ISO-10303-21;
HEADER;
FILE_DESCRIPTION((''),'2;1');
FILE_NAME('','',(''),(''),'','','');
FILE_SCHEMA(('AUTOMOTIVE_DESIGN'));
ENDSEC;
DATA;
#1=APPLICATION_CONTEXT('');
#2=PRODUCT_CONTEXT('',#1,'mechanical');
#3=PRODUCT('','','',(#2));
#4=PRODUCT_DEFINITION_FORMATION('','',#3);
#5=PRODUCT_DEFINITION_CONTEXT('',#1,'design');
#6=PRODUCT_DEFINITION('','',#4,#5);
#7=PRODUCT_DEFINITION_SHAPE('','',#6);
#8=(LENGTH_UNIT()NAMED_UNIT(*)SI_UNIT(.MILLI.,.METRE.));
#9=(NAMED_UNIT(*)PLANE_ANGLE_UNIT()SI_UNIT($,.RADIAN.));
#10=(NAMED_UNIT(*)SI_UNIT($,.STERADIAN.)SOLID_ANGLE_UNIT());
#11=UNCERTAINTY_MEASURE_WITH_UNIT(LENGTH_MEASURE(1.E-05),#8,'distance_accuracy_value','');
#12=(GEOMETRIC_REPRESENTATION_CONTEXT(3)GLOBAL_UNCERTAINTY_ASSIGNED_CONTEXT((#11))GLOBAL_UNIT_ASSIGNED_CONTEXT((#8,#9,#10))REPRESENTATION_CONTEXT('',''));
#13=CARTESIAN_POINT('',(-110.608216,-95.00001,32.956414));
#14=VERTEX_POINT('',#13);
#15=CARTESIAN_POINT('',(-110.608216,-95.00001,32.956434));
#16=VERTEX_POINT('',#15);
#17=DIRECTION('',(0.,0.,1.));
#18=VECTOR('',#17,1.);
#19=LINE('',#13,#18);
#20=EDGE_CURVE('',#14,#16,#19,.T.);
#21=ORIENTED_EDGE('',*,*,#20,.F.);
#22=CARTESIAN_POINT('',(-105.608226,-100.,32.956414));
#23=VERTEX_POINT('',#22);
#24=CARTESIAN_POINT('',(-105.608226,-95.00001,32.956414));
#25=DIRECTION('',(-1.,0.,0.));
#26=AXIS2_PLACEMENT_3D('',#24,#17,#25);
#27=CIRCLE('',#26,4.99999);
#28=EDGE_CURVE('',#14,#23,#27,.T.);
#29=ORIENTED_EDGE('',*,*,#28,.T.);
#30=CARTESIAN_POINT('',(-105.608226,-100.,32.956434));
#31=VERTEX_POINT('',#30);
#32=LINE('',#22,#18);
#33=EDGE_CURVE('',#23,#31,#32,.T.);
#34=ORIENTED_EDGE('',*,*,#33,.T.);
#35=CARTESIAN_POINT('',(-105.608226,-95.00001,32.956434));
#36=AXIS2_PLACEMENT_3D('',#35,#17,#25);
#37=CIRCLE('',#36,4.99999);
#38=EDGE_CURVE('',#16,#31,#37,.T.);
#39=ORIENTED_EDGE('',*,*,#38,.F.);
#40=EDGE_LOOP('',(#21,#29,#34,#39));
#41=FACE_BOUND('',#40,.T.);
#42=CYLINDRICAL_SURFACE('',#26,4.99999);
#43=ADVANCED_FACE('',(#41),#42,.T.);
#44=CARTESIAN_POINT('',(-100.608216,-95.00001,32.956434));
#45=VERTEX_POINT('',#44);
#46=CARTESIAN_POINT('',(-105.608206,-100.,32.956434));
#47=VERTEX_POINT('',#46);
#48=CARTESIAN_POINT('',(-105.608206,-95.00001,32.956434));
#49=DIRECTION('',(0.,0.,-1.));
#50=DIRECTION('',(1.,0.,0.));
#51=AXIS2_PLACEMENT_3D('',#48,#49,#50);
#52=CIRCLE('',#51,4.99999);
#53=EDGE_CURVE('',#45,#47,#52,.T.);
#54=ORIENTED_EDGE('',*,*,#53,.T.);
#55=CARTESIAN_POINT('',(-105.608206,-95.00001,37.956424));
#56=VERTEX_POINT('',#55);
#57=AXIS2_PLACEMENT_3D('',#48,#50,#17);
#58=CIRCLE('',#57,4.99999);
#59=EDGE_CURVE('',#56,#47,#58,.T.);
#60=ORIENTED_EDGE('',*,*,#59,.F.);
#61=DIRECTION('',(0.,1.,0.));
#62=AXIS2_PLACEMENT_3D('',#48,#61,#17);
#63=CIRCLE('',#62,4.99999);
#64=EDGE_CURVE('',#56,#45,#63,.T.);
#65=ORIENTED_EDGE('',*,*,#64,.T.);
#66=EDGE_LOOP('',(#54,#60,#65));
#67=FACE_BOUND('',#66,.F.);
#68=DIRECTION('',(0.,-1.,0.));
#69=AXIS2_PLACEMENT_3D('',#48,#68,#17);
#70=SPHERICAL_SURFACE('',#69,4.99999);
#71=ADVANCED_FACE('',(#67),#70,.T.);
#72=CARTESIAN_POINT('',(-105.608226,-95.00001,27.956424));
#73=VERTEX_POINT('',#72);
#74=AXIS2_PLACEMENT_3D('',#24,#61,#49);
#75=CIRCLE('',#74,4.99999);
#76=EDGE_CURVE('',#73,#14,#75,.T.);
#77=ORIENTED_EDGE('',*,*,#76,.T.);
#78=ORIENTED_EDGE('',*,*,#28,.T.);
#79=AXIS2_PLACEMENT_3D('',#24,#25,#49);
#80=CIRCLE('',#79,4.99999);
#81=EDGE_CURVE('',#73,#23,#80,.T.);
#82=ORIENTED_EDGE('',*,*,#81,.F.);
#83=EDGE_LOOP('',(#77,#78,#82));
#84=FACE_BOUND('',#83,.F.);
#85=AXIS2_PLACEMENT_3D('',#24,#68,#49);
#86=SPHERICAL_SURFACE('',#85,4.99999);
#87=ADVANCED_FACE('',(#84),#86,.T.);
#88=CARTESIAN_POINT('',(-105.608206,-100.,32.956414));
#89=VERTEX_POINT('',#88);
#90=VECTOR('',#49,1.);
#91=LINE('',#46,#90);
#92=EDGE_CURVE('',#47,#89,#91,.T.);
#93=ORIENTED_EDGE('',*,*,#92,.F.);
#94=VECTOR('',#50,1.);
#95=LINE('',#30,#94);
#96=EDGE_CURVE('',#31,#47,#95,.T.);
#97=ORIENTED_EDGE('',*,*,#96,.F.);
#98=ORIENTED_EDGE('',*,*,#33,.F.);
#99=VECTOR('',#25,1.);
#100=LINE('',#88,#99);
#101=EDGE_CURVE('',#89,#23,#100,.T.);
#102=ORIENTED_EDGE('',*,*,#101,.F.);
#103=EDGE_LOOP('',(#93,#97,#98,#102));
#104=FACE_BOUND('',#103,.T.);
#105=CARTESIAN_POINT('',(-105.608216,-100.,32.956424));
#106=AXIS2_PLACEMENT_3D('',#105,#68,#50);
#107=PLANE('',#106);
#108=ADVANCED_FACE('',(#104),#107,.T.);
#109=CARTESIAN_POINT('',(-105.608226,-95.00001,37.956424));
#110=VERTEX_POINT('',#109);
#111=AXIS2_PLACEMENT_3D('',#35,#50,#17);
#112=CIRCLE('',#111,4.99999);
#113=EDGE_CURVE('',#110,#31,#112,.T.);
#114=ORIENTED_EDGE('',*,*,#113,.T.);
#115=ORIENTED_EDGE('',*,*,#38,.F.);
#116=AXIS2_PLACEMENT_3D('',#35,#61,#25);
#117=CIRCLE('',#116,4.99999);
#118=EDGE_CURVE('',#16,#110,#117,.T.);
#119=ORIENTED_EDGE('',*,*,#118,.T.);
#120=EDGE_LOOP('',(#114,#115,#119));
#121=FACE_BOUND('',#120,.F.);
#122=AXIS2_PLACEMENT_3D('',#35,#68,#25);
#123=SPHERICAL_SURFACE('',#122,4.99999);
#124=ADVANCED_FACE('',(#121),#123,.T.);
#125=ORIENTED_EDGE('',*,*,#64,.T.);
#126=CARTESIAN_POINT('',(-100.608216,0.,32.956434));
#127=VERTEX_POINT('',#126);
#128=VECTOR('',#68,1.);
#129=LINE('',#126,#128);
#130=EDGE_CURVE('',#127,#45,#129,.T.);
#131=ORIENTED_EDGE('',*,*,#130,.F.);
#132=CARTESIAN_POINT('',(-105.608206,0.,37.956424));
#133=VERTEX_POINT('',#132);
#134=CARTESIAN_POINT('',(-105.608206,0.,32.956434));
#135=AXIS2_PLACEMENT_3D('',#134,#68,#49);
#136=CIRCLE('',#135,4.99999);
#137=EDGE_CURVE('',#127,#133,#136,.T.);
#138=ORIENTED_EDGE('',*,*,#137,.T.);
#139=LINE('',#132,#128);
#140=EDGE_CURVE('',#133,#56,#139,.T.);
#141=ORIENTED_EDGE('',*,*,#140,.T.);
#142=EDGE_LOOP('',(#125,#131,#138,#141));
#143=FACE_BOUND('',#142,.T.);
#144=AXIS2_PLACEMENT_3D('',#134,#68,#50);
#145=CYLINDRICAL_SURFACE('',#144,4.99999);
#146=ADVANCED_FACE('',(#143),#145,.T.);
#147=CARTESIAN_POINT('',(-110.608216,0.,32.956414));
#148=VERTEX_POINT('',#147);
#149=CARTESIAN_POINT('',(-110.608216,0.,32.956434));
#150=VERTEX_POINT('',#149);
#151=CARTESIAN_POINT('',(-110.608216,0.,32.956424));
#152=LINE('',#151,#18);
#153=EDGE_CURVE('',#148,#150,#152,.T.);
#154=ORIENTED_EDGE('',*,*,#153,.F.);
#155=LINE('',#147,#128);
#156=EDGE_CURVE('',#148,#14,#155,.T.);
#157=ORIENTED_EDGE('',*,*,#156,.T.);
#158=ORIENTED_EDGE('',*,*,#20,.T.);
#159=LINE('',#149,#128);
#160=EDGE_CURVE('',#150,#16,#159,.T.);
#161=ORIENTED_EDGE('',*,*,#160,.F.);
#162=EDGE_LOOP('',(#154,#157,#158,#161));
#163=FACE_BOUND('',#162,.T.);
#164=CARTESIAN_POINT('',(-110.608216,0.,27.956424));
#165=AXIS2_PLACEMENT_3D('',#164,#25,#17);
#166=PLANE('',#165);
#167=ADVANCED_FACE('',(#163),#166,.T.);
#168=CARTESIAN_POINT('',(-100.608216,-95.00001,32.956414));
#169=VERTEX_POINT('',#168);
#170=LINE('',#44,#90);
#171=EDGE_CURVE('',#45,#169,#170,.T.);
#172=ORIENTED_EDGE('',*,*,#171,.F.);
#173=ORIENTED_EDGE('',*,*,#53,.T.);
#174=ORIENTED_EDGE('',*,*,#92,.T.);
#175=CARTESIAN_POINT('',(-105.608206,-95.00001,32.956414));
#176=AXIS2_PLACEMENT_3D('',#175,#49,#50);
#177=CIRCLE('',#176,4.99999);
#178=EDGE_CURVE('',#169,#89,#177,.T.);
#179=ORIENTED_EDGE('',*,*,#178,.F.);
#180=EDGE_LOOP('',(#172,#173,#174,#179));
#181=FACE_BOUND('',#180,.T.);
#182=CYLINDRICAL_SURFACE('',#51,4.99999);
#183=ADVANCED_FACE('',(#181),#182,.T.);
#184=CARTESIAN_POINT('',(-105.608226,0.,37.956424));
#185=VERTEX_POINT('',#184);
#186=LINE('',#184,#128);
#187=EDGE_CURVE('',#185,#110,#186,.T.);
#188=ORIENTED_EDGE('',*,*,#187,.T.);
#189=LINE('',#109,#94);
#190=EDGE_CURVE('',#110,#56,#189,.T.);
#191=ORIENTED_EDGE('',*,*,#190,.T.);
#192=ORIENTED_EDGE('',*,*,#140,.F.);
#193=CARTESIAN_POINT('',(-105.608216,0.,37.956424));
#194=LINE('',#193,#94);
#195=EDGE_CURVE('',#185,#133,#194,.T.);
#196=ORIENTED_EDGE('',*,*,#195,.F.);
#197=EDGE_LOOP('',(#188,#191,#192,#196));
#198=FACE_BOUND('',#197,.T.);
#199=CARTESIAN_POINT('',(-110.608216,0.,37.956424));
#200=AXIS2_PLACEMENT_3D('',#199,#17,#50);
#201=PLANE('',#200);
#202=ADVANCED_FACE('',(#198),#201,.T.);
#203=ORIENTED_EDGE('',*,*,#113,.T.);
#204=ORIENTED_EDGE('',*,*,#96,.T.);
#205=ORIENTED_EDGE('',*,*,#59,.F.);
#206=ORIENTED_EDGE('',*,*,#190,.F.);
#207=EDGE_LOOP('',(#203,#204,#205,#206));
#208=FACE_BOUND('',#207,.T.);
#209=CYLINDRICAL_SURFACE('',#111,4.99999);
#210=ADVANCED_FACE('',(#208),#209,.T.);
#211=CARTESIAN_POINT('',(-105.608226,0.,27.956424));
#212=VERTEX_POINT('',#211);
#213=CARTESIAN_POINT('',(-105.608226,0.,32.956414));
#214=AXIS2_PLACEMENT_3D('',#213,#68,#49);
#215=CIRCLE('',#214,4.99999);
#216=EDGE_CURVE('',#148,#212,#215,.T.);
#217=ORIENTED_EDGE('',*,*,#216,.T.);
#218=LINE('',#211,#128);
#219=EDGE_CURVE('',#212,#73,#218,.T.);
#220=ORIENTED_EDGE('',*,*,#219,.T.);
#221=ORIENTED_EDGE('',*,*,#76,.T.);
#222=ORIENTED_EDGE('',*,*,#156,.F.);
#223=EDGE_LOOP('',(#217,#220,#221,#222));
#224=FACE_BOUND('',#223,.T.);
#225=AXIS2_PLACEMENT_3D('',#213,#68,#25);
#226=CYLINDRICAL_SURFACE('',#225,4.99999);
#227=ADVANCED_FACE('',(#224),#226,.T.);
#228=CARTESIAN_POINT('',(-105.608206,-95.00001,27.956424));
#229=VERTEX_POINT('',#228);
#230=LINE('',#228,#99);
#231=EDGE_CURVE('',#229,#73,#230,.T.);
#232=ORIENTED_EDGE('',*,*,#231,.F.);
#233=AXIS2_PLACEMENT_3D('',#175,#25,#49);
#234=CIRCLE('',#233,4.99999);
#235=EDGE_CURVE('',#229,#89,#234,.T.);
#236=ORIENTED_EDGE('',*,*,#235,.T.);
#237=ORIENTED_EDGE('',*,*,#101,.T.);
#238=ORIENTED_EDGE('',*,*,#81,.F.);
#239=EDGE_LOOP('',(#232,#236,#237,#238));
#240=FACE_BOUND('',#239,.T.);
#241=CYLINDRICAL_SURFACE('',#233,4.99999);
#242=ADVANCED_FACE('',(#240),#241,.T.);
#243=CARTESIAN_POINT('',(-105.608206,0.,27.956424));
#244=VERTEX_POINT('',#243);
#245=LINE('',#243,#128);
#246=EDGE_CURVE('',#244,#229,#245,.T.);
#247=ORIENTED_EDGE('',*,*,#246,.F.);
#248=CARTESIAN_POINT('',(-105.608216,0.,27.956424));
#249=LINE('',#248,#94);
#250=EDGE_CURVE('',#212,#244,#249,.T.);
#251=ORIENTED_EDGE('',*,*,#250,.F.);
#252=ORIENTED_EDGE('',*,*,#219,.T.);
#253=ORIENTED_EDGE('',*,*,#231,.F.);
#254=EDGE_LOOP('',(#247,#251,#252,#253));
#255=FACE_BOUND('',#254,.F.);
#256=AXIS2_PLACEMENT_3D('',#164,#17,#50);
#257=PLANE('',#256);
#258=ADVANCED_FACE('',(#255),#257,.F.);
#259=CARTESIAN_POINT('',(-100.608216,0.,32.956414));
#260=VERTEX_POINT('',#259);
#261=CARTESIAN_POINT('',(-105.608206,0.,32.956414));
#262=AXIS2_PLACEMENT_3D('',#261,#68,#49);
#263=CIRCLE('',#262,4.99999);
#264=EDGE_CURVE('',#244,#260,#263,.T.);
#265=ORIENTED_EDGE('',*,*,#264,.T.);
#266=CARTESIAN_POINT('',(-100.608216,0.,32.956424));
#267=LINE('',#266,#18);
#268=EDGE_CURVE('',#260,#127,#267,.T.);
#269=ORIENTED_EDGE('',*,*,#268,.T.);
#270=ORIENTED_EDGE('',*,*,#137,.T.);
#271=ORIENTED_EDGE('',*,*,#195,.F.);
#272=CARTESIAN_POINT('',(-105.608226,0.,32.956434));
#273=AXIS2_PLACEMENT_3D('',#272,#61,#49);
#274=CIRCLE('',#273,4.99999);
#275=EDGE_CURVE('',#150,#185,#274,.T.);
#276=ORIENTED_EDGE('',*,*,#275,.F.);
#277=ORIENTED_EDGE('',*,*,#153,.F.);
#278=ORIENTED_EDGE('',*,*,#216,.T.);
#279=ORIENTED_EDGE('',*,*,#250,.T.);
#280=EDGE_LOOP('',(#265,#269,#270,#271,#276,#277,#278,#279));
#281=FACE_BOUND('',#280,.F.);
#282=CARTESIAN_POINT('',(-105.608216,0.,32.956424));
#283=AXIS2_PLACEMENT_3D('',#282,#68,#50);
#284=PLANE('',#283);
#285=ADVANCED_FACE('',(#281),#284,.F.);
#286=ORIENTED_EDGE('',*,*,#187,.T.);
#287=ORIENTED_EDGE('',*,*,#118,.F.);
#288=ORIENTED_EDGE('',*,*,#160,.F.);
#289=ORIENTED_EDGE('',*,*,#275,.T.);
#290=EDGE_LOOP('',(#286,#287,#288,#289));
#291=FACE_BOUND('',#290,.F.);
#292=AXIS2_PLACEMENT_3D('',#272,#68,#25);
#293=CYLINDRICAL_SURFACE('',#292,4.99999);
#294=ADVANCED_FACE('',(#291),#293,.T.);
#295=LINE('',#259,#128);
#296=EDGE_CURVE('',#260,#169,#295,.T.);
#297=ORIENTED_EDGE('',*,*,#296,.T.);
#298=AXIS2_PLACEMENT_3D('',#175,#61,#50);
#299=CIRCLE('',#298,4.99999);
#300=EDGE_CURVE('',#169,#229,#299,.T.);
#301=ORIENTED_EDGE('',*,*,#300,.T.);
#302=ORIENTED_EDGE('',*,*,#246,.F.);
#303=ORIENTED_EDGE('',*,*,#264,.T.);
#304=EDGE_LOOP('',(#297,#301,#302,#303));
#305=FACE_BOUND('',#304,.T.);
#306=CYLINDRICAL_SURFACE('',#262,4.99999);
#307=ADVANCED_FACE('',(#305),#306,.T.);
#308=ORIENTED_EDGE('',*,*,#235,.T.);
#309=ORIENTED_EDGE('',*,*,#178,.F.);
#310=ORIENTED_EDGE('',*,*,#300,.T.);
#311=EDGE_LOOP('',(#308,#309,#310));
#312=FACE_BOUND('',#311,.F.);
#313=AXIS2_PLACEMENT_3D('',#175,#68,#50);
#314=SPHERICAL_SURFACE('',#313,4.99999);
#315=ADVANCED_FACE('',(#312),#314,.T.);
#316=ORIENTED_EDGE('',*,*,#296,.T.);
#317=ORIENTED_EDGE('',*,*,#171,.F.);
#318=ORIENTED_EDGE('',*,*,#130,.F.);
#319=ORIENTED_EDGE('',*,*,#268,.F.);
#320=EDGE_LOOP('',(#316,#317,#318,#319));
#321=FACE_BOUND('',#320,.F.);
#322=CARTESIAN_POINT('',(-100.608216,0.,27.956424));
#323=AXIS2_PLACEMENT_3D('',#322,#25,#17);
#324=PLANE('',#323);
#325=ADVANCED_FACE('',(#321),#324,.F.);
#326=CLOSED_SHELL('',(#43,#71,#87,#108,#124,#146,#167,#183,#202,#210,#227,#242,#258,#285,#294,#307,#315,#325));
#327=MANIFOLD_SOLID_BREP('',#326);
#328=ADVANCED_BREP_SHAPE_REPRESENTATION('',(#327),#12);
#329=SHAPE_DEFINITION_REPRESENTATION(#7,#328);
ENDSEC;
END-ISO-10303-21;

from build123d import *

# Parameters (mm, degrees)
F0_W     = 10
F0_H     = 10
F1_DEPTH = 100
F2_R     = 4.99999
F3_R     = 4.99999


# Not quite as in the source:
# - a fillet or chamfer is up to 0.001 mm smaller than in the source, because OpenCascade refuses the exact size


with BuildPart() as f1:
    # F0 (on Front) → F1 (new body)
    with BuildSketch(Plane.XZ):
        with Locations((-105.608215639, 32.9564241692)):
            Rectangle(F0_W, F0_H)
    extrude(amount=F1_DEPTH)

    # F2 (radius 5 in the source; OpenCascade refuses exactly that, so slightly less here)
    f2_edges = [f1.edges().sort_by_distance(p)[0] for p in [
        (-110.608216, -50, 37.956424),
        (-100.608216, -50, 37.956424),
        (-100.608216, -50, 27.956424),
        (-110.608216, -50, 27.956424),
    ]]
    fillet(f2_edges, radius=F2_R)

    # F3 (radius 5 in the source; OpenCascade refuses exactly that, so slightly less here)
    f3_edges = [f1.edges().sort_by_distance(p)[0] for p in [
        (-109.143752, -100, 36.491961),
    ]]
    fillet(f3_edges, radius=F3_R)


solid = f1.part
